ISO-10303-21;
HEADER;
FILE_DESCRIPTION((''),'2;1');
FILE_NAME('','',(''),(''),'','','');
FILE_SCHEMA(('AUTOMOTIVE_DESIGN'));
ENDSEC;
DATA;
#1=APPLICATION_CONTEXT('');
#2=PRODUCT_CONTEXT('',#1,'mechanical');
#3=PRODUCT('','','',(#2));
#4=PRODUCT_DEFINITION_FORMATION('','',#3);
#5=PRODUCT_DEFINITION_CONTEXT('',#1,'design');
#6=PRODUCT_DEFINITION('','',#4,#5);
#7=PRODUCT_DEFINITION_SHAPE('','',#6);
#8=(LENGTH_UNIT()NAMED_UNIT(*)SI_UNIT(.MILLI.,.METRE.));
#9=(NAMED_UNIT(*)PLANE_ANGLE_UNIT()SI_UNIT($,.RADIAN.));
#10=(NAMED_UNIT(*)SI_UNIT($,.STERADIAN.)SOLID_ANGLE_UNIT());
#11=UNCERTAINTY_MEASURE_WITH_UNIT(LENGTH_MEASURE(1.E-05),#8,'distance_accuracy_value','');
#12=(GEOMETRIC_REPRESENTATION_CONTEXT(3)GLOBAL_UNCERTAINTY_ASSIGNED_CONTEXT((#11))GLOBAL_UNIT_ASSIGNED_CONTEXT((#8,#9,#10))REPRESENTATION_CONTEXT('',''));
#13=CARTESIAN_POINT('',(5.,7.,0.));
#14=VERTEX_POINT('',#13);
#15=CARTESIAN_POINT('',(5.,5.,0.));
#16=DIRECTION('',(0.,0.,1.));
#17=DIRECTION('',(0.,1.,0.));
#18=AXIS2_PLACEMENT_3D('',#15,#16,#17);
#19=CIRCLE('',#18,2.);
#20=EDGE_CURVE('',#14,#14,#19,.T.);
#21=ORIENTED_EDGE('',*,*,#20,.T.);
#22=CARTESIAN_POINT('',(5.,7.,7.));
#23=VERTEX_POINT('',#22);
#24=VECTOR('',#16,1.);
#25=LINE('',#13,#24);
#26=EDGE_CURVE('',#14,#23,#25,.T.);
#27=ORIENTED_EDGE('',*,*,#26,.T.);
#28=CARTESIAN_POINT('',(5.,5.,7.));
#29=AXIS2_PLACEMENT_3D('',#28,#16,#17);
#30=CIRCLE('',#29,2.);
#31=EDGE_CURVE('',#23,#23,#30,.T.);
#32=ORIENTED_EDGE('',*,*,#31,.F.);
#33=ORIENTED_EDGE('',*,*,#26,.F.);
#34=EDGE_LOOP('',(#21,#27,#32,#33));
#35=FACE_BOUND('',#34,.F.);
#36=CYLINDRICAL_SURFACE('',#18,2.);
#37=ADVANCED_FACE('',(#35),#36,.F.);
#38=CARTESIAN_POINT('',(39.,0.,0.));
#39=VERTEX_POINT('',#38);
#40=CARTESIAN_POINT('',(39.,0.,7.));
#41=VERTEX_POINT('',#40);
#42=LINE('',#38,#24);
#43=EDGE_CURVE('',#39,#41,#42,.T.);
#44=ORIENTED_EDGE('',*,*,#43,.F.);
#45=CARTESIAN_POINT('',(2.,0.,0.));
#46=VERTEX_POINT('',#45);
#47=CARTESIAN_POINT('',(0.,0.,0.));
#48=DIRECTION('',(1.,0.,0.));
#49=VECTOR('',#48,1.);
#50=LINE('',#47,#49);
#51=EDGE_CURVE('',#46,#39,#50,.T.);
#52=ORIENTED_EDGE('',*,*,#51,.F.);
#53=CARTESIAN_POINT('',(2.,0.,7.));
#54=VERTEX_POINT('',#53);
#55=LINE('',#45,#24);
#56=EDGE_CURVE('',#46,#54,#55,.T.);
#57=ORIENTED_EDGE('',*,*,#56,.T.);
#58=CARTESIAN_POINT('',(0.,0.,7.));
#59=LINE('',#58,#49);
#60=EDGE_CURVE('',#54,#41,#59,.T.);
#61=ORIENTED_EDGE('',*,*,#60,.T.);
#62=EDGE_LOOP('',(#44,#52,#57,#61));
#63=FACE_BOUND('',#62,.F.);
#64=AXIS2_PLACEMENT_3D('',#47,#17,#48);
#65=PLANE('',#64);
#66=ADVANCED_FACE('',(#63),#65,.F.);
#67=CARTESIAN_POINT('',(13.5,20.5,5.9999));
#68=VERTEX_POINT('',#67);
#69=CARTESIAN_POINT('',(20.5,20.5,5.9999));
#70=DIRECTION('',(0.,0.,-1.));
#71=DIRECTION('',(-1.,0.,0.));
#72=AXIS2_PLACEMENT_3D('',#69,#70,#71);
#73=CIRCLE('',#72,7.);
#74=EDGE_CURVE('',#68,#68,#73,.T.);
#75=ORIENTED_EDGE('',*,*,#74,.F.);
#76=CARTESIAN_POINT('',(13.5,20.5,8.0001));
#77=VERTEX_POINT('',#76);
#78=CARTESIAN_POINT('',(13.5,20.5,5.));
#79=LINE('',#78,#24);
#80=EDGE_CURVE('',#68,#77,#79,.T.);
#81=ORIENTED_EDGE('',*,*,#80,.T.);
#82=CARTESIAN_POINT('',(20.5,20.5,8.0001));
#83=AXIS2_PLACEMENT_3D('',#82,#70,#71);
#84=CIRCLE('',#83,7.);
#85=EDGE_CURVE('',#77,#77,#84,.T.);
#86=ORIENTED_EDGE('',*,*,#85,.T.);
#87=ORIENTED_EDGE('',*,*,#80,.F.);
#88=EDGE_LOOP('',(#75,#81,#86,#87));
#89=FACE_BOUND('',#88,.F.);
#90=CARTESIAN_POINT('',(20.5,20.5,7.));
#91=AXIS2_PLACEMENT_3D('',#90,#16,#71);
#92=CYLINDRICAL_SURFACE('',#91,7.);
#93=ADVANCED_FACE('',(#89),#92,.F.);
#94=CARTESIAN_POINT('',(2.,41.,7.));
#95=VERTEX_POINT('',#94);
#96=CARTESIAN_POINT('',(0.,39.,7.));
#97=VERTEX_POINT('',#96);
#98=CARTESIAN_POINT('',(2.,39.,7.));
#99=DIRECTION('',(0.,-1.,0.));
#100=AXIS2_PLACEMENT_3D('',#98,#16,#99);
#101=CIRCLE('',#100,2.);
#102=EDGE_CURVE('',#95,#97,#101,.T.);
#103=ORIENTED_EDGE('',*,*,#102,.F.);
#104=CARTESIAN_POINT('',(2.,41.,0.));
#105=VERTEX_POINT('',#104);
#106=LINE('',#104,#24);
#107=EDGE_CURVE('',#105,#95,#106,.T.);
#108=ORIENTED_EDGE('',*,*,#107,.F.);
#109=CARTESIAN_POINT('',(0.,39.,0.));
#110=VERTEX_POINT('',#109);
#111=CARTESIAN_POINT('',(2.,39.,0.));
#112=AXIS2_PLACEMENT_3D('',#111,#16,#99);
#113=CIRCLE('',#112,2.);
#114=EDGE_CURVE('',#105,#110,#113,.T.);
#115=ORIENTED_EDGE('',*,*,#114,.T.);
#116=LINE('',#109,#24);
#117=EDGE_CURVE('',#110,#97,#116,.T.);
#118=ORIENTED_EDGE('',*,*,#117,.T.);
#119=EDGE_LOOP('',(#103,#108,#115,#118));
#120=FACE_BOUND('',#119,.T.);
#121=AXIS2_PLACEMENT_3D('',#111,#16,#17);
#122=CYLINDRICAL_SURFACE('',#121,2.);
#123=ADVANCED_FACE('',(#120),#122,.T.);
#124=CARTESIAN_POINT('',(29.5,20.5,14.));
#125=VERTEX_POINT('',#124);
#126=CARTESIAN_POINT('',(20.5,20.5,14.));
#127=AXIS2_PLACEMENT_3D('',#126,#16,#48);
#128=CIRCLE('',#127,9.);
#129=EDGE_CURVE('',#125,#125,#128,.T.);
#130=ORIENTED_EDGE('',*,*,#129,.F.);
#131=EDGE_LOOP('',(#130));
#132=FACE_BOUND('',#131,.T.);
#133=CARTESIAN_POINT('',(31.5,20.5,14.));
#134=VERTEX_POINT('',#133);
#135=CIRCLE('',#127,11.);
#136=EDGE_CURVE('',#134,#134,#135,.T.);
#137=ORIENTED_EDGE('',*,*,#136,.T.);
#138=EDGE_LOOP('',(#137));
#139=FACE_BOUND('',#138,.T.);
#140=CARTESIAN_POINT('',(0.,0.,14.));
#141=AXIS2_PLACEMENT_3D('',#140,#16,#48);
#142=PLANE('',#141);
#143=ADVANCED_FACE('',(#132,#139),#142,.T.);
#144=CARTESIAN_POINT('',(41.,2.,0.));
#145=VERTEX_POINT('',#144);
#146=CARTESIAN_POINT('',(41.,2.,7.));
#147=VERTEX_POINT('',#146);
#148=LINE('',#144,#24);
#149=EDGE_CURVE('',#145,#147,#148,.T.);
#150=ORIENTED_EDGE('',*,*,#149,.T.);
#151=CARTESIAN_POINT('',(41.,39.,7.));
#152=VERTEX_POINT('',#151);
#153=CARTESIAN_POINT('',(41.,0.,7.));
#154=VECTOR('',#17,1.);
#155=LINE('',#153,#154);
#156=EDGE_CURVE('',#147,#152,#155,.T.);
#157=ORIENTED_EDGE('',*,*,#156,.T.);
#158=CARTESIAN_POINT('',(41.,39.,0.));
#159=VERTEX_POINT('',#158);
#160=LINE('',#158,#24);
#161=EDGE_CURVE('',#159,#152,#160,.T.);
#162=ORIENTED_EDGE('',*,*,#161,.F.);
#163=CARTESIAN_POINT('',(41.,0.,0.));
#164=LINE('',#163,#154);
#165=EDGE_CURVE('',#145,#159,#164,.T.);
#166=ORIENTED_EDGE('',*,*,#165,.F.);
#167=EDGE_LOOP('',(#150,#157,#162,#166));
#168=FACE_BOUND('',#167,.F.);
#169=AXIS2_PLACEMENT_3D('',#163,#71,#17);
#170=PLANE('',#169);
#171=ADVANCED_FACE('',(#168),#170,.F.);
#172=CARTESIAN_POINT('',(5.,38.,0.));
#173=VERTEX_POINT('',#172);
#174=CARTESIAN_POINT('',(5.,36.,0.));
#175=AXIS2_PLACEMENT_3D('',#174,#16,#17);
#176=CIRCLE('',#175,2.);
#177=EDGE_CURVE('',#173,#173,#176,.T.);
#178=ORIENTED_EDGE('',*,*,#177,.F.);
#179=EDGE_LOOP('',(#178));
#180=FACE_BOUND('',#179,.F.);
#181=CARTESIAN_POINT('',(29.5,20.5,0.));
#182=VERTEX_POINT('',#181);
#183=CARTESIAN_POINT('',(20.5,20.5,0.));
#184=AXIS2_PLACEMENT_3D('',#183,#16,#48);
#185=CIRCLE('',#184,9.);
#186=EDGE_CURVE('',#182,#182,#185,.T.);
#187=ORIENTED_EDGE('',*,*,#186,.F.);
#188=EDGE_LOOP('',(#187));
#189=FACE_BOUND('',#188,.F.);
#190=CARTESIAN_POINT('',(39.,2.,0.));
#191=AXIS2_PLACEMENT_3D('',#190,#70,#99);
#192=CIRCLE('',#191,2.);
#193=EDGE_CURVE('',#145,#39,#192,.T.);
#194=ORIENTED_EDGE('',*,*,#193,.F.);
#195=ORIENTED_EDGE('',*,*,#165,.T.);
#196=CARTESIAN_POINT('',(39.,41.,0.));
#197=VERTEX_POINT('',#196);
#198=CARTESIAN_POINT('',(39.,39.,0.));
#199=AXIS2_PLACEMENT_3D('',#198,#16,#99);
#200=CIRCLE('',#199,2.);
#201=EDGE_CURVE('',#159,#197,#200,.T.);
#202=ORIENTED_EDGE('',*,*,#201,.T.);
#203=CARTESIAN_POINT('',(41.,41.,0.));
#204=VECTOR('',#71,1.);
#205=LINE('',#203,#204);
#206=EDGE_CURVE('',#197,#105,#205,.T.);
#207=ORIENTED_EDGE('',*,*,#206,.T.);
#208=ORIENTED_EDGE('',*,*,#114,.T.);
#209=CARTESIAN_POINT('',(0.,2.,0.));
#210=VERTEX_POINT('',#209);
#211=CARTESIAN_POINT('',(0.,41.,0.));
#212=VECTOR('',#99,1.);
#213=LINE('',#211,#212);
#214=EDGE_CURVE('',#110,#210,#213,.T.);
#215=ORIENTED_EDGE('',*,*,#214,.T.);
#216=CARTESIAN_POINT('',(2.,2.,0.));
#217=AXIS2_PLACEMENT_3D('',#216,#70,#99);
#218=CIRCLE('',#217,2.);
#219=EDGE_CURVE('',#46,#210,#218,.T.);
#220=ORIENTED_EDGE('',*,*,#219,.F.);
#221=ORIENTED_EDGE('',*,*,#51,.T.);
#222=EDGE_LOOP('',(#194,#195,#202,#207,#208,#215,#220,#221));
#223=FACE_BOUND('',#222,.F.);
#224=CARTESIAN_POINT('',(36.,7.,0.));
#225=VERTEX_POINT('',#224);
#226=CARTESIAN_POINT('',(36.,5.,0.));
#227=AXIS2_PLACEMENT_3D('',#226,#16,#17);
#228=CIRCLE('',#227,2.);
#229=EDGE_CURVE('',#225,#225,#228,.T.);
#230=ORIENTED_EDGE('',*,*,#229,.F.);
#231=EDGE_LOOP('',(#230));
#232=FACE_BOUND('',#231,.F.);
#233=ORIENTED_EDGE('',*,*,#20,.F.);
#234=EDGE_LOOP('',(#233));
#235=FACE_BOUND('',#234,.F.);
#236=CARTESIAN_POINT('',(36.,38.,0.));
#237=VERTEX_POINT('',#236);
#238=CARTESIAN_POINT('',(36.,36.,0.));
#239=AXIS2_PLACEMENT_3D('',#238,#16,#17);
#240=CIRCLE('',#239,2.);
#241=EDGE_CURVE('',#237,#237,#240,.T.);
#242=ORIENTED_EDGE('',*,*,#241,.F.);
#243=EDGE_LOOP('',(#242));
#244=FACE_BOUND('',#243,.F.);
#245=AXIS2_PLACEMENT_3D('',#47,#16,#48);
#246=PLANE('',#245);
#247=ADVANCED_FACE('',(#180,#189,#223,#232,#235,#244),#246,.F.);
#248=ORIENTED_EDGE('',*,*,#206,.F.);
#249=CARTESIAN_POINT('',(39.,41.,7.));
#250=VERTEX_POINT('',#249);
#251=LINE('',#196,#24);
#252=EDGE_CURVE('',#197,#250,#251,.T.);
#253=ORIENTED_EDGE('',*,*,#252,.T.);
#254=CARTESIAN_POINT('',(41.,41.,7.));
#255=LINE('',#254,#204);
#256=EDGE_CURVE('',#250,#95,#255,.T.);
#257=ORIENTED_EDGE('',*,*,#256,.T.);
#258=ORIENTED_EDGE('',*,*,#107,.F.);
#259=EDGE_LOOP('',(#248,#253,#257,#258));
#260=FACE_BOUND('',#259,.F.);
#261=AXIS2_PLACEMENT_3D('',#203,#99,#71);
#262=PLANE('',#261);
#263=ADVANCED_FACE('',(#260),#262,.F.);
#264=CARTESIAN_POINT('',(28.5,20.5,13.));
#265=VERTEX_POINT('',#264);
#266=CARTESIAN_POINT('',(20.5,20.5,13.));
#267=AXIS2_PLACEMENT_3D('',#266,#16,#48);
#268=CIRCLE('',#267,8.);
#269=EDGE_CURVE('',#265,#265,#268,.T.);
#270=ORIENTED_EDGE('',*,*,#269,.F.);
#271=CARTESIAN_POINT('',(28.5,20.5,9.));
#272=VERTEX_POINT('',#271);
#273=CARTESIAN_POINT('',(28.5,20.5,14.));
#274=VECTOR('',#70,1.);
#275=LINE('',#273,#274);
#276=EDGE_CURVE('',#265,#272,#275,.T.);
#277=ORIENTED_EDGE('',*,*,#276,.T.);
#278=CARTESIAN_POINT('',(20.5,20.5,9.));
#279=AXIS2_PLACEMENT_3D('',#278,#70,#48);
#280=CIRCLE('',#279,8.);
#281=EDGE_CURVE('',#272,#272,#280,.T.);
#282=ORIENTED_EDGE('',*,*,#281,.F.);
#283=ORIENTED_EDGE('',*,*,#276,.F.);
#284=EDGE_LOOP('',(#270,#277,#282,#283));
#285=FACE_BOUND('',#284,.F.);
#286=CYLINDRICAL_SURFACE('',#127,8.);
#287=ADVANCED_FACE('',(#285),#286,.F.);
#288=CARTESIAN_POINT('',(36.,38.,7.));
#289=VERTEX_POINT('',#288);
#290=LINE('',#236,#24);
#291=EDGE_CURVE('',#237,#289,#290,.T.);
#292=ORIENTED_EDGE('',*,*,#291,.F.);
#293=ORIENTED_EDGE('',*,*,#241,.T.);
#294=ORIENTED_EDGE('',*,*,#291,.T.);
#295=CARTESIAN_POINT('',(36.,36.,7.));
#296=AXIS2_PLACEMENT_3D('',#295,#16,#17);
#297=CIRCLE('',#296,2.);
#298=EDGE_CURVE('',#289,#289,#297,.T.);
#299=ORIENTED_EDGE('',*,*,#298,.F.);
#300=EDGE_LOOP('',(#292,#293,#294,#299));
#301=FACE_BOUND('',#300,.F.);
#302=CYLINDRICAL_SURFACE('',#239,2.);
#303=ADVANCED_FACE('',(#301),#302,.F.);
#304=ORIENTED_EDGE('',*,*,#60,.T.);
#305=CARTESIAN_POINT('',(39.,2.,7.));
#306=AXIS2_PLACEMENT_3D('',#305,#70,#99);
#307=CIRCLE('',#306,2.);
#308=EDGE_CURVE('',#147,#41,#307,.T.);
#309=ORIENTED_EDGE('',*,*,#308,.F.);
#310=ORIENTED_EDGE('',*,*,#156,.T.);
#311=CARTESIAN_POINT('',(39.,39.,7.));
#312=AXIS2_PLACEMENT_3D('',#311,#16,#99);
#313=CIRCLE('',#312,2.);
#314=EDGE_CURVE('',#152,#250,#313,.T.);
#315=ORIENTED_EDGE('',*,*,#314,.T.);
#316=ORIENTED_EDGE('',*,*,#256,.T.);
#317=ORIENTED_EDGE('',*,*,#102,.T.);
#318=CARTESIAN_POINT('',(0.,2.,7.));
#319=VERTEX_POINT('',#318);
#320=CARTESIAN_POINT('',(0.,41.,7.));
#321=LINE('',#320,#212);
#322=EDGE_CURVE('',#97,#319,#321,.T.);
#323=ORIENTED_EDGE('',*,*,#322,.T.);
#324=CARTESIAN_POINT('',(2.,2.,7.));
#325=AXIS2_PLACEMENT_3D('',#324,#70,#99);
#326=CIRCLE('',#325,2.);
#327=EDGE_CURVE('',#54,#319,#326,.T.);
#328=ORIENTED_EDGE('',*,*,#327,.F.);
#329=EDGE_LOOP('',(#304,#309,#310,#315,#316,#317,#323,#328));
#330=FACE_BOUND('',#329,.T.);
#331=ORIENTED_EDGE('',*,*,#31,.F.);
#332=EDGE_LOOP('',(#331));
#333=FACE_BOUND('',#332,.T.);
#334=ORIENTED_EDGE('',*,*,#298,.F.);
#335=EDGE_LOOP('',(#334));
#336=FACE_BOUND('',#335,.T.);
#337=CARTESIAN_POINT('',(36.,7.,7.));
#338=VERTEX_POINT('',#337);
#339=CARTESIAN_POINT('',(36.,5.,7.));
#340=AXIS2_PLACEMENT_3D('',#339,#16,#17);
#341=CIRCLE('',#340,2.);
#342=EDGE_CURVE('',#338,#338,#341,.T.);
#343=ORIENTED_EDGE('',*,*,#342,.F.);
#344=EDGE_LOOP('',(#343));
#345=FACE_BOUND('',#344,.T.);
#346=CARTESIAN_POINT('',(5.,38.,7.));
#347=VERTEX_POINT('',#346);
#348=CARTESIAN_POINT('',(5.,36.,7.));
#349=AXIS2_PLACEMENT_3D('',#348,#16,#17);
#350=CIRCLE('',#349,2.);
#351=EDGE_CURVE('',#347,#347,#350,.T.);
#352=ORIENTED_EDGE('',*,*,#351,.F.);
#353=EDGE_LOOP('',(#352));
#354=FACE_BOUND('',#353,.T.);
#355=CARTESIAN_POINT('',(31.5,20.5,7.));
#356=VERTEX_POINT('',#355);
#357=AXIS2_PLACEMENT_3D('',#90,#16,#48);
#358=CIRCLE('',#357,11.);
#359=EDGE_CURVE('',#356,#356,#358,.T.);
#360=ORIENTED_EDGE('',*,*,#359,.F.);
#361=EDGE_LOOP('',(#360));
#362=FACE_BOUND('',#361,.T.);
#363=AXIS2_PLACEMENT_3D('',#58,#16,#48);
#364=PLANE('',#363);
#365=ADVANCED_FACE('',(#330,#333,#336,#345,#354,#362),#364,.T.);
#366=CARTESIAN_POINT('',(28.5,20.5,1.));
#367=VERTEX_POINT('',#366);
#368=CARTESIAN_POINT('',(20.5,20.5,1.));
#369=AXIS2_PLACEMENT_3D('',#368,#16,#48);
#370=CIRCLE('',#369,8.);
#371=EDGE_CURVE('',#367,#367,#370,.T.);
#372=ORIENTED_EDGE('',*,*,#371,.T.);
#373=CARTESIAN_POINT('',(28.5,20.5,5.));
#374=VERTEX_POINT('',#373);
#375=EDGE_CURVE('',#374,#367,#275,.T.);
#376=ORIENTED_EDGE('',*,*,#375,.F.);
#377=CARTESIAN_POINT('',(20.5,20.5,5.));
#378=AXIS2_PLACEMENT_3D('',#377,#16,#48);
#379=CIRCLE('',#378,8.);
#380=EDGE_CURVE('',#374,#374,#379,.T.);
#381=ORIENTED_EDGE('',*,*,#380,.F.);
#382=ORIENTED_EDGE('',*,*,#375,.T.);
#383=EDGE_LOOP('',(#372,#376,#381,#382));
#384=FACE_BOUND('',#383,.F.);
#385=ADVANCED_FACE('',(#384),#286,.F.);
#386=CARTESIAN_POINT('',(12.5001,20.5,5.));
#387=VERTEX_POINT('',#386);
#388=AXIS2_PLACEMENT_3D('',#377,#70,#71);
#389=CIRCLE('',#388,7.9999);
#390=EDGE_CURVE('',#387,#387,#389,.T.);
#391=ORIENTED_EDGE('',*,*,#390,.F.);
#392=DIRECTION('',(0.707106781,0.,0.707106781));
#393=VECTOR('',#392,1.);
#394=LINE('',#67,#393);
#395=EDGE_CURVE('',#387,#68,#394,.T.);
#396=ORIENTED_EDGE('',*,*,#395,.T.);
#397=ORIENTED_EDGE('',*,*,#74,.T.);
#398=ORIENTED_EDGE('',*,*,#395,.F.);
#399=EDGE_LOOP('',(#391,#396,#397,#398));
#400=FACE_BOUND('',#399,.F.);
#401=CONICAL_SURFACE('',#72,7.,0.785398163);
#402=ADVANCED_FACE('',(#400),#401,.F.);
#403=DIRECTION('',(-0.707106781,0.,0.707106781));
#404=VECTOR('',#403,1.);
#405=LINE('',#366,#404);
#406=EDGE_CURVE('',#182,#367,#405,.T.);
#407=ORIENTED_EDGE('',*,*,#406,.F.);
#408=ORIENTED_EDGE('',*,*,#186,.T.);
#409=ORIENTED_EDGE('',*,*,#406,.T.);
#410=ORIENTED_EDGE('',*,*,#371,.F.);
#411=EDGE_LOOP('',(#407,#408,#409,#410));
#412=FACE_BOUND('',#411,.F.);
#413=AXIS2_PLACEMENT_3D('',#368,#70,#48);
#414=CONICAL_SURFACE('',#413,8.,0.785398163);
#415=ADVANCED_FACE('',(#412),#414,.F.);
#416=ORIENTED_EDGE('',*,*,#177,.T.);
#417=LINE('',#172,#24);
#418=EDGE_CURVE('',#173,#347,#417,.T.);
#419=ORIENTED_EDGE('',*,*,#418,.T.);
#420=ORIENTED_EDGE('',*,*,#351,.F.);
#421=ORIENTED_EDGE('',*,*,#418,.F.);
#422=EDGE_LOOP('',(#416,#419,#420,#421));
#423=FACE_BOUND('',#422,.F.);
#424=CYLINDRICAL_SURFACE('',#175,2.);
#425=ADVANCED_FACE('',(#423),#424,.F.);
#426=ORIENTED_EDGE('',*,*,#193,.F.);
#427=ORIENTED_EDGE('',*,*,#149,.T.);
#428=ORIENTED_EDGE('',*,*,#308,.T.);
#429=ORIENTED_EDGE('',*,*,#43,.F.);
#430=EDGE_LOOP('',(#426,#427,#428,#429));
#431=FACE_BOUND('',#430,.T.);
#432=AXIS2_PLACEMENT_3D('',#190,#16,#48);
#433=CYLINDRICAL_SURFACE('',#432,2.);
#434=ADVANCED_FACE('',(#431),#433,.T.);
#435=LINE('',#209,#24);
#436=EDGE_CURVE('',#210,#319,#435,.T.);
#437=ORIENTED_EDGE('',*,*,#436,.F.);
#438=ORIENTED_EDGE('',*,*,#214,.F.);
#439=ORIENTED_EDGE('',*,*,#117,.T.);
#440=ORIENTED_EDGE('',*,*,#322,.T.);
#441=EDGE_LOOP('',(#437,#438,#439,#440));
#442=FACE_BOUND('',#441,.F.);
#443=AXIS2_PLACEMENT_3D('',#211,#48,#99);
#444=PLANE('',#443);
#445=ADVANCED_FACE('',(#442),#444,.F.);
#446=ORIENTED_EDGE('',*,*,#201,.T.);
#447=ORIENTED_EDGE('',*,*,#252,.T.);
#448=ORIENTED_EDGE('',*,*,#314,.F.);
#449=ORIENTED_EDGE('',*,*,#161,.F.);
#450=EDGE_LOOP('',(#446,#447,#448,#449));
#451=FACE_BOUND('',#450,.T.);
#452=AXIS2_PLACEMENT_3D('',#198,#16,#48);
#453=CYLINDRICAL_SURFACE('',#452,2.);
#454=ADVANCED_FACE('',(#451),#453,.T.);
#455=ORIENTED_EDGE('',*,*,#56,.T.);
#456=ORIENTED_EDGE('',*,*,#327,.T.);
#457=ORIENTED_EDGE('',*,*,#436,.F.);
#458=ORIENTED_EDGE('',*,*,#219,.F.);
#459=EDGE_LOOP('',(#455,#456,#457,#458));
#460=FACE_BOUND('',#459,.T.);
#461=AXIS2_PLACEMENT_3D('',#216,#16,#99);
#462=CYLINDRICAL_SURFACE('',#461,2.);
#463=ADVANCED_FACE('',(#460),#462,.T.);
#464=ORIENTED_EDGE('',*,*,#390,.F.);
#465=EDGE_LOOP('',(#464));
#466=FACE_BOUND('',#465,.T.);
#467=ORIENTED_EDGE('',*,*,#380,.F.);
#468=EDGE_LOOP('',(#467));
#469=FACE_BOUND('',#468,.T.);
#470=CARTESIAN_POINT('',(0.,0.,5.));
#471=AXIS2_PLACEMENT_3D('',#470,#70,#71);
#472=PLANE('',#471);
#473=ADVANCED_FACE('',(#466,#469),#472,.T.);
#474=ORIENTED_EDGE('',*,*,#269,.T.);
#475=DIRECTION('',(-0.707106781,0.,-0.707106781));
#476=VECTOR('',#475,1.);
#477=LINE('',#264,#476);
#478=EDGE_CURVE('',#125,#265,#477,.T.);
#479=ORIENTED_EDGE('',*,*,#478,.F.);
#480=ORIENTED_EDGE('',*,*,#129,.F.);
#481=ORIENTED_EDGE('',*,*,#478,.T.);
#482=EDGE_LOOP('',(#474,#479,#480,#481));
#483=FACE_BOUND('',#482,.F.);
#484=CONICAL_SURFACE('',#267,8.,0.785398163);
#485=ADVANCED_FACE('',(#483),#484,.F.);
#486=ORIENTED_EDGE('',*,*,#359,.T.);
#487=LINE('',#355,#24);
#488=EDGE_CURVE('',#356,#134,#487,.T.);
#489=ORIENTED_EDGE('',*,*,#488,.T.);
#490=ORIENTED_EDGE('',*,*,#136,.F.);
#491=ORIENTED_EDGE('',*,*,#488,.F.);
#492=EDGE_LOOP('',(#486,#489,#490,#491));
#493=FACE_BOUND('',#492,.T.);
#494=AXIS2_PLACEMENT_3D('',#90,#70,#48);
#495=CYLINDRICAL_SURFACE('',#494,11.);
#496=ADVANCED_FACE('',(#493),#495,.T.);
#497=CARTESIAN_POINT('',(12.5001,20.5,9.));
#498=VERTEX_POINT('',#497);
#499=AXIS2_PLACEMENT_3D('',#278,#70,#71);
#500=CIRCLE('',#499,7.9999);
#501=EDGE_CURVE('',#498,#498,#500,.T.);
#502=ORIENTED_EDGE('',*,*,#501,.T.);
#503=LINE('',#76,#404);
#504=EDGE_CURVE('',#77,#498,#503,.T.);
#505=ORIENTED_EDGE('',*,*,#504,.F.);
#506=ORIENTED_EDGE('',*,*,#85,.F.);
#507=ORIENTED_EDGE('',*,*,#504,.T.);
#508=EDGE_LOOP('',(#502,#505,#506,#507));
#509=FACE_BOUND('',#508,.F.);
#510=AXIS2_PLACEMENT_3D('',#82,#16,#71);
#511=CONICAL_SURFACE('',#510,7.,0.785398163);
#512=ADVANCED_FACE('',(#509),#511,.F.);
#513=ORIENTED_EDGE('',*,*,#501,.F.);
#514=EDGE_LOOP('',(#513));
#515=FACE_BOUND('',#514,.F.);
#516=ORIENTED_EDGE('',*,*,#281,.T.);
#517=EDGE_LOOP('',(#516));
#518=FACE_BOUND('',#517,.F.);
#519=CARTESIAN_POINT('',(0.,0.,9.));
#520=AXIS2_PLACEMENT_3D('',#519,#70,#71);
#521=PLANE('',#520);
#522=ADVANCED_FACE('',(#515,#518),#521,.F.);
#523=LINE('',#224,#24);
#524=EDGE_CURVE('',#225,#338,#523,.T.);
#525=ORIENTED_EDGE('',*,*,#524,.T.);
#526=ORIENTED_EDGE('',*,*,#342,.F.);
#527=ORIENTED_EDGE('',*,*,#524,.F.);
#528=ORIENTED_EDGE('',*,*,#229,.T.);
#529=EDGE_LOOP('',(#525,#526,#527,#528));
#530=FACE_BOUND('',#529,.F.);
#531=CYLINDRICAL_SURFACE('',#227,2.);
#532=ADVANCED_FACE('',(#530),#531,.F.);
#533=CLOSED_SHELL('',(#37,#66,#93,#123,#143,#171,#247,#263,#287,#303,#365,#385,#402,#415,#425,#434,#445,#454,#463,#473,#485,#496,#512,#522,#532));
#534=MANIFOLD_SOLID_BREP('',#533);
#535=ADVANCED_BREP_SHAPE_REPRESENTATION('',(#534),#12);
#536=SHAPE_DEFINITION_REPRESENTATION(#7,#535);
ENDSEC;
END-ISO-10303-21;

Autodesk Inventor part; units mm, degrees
ref_plane "YZ Plane" through (0, 0, 0) normal (1, 0, 0) x (0, 1, 0)
ref_plane "XZ Plane" through (0, 0, 0) normal (0, 1, 0) x (-1, 0, 0)
sketch "Sketch1" plane through (0, 0, 0) normal (0, 0, 1) x (1, 0, 0)
  line L0 (5, 36) -> (36, 36) construction
  line L1 (36, 36) -> (36, 5) construction
  line L2 (36, 5) -> (5, 5) construction
  line L3 (5, 5) -> (5, 36) construction
  line L4 (41, 41) -> (0, 41)
  line L5 (0, 41) -> (0, 0)
  line L6 (0, 0) -> (41, 0)
  line L7 (41, 0) -> (41, 41)
  dimension "d0" = 31
  dimension "d1" = 5
extrude "Extrusion1" add sketch "Sketch1" along normal blind 7
hole "Hole1" at (5, 36, 0) at (36, 36, 0) at (36, 5, 0) at (5, 5, 0) direction (0, 0, 1) diameter 4 end through all
sketch "Sketch2" plane through (0, 0, 7) normal (0, 0, 1) x (1, 0, 0)
  circle A0 centre (20.5, 20.5) radius 11
  circle A1 centre (20.5, 20.5) radius 8 construction
  line L0 (41, 0) -> (41, 41) projected
  line L1 (41, 41) -> (0, 41) projected
  point P0 (0, 0)
  point P1 (41, 20.5)
  point P2 (20.5, 41)
  dimension "d11" = 22
  dimension "d12" = 16
extrude "Extrusion2" add sketch "Sketch2" along normal blind 7
sketch "Sketch3" plane through (20.5, 20.5, 14) normal (0, 0, 1) x (1, 0, 0)
  circle A0 centre (0, 0) radius 11 projected
  circle A1 centre (0, 0) radius 8
  point P0 (-20.5, -20.5)
  dimension "d15" = 16
extrude "Extrusion3" cut sketch "Sketch3" against normal through all contours A1
ref_plane "Work Plane1" through (0, 0, 7) normal (0, 0, -1) x (-1, 0, 0)
sketch "Sketch4" plane through (0, 0, 7) normal (0, 0, -1) x (-1, 0, 0)
  circle A0 centre (-20.5, 20.5) radius 8 projected
  circle A1 centre (-20.5, 20.5) radius 11 projected
  circle A2 centre (-20.5, 20.5) radius 7
  point P0 (0, 0)
  dimension "d18" = 1
extrude "Extrusion4" add sketch "Sketch4" along normal mid plane 4 contours A0
chamfer "Chamfer1" distance 1 angle 45 2 edges at (27.5, 20.5, 9) (27.5, 20.5, 5)
fillet "Fillet1" radius 2 4 edges at (0, 41, 3.5) (0, 0, 3.5) (41, 0, 3.5) (41, 41, 3.5)
chamfer "Chamfer2" distance 1 angle 45 2 edges at (12.5, 20.5, 0) (12.5, 20.5, 14)
properties part number "Motor to Bearing Adapter"
